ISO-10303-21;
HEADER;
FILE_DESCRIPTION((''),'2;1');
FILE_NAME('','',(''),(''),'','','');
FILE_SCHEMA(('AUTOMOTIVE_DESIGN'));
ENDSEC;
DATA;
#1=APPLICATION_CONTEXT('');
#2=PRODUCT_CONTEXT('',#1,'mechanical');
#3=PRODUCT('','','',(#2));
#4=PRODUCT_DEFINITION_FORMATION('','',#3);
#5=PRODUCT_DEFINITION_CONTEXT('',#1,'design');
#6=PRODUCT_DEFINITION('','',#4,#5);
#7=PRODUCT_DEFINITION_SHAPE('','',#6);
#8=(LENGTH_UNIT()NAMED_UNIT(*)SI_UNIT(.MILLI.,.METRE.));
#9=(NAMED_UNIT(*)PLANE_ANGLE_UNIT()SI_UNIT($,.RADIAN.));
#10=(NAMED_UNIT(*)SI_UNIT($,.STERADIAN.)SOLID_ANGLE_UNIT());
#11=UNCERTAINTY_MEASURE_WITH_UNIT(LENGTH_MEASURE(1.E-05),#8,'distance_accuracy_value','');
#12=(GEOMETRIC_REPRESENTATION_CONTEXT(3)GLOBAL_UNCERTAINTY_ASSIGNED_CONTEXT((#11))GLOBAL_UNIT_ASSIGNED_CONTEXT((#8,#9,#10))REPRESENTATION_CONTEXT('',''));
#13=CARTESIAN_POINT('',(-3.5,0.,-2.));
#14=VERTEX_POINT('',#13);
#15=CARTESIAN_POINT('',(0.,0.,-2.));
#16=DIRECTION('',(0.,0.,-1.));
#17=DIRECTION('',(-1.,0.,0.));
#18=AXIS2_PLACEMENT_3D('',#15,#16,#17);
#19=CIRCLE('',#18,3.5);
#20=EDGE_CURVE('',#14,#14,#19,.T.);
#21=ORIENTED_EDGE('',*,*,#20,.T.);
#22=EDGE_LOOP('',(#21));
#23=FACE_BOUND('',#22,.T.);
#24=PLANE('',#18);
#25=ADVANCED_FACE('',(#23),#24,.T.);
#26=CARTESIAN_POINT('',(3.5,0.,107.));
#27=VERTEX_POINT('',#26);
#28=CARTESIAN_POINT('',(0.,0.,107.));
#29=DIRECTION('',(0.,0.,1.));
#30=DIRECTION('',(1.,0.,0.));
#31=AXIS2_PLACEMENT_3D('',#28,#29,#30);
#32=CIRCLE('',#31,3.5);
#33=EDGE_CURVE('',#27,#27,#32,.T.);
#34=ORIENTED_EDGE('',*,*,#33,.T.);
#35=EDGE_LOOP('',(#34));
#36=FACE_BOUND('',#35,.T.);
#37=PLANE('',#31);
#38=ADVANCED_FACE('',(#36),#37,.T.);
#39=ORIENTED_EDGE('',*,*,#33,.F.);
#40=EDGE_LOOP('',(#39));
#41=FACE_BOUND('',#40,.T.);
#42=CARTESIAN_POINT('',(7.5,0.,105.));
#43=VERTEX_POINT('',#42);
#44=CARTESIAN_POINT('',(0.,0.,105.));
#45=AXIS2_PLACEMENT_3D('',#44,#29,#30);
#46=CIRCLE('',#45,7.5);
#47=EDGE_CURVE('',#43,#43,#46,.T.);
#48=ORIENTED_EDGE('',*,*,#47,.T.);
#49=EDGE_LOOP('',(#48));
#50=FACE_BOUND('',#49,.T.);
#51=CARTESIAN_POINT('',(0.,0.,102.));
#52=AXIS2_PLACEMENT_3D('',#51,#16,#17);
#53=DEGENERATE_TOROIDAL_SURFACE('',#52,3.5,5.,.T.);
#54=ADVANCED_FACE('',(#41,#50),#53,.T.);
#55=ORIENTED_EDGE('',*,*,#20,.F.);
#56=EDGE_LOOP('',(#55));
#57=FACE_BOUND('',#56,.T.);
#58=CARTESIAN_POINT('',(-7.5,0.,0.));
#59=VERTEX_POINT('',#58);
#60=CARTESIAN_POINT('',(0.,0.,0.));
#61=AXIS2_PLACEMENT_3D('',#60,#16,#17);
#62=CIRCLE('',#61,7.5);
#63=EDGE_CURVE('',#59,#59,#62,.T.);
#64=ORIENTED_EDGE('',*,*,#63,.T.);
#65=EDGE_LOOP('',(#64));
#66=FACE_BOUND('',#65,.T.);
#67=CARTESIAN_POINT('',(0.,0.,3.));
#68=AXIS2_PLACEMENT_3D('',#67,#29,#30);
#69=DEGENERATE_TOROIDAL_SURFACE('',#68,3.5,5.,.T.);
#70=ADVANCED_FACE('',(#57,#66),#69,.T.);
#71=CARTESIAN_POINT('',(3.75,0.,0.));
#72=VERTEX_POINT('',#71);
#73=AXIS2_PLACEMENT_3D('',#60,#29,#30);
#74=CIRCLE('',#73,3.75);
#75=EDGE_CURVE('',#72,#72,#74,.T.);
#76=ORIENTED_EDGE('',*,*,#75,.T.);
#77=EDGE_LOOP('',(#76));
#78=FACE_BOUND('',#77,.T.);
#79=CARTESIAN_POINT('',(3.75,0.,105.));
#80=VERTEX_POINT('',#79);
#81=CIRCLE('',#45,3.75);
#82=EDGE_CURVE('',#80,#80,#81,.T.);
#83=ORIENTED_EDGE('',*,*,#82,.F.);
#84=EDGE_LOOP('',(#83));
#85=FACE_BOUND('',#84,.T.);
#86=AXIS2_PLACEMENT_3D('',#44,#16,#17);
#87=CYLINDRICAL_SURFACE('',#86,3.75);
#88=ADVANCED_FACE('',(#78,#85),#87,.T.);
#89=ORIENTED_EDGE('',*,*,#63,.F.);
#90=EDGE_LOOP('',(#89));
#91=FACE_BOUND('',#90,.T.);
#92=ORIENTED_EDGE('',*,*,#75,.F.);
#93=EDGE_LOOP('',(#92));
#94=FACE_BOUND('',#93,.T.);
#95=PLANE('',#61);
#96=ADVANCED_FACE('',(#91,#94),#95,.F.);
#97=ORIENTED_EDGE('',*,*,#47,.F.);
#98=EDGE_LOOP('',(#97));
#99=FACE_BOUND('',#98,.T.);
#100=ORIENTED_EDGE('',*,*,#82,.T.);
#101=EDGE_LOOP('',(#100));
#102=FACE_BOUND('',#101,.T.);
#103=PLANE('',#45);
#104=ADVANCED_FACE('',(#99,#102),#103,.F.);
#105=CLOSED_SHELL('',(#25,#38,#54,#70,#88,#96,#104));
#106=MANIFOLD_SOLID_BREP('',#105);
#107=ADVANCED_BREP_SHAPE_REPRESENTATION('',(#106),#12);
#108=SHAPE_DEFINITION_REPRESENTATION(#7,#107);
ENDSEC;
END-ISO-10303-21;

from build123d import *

# Parameters (mm, degrees)
SKETCH1_R           = 3.75
BOSS_EXTRUDE1_DEPTH = 105
SKETCH3_R           = 7.5
BOSS_EXTRUDE2_DEPTH = 2
BOSS_EXTRUDE3_START = 2
SKETCH4_R           = 7.5
BOSS_EXTRUDE3_DEPTH = 2
FILLET1_R           = 5


with BuildPart() as part:
    # Sketch1 → Boss-Extrude1 (new body)
    with BuildSketch(Plane.XY):
        Circle(SKETCH1_R)
    extrude(amount=BOSS_EXTRUDE1_DEPTH)

    # Sketch3 → Boss-Extrude2 (add)
    with BuildSketch(Plane.XY.offset(105)):
        Circle(SKETCH3_R)
    extrude(amount=BOSS_EXTRUDE2_DEPTH)

    # Sketch4 → Boss-Extrude3 (add)
    with BuildSketch(Plane(origin=(0, 0, 0), x_dir=(-1, 0, 0), z_dir=(0, 0, -1)).offset(BOSS_EXTRUDE3_START)):
        with Locations(Location((0, 0, 0), (0, 0, 180))):
            Circle(SKETCH4_R)
    extrude(amount=-BOSS_EXTRUDE3_DEPTH)

    # Fillet1
    # the kernel refuses this fillet: 5 mm, written as the material it takes off along each edge
    with BuildSketch(Plane(origin=(0, 0, -2), x_dir=(1, 0, 0), z_dir=(0, 1, 0))) as fillet1_piece_1:
        with BuildLine():
            CenterArc((3.5, -5), FILLET1_R, 36.869897646, 53.130102354)
            Line((3.5, 0), (3.5, 0.1))
            Line((3.5, 0.1), (7.5, 0.1))
            Line((7.5, 0.1), (7.6, 0))
            ThreePointArc((7.6, 0), (7.6, -1), (7.58, -1.94))
            Line((7.58, -1.94), (7.5, -2))
        make_face()
    revolve(axis=Axis((0, 0, -2), (0, 0, -1)), mode=Mode.SUBTRACT)
    with BuildSketch(Plane(origin=(0, 0, 107), x_dir=(1, 0, 0), z_dir=(0, -1, 0))) as fillet1_piece_2:
        with BuildLine():
            CenterArc((3.5, -5), FILLET1_R, 36.869897646, 53.130102354)
            Line((3.5, 0), (3.5, 0.1))
            Line((3.5, 0.1), (7.5, 0.1))
            Line((7.5, 0.1), (7.6, 0))
            ThreePointArc((7.6, 0), (7.6, -1), (7.58, -1.94))
            Line((7.58, -1.94), (7.5, -2))
        make_face()
    revolve(axis=Axis((0, 0, 107), (0, 0, 1)), mode=Mode.SUBTRACT)


solid = part.part
